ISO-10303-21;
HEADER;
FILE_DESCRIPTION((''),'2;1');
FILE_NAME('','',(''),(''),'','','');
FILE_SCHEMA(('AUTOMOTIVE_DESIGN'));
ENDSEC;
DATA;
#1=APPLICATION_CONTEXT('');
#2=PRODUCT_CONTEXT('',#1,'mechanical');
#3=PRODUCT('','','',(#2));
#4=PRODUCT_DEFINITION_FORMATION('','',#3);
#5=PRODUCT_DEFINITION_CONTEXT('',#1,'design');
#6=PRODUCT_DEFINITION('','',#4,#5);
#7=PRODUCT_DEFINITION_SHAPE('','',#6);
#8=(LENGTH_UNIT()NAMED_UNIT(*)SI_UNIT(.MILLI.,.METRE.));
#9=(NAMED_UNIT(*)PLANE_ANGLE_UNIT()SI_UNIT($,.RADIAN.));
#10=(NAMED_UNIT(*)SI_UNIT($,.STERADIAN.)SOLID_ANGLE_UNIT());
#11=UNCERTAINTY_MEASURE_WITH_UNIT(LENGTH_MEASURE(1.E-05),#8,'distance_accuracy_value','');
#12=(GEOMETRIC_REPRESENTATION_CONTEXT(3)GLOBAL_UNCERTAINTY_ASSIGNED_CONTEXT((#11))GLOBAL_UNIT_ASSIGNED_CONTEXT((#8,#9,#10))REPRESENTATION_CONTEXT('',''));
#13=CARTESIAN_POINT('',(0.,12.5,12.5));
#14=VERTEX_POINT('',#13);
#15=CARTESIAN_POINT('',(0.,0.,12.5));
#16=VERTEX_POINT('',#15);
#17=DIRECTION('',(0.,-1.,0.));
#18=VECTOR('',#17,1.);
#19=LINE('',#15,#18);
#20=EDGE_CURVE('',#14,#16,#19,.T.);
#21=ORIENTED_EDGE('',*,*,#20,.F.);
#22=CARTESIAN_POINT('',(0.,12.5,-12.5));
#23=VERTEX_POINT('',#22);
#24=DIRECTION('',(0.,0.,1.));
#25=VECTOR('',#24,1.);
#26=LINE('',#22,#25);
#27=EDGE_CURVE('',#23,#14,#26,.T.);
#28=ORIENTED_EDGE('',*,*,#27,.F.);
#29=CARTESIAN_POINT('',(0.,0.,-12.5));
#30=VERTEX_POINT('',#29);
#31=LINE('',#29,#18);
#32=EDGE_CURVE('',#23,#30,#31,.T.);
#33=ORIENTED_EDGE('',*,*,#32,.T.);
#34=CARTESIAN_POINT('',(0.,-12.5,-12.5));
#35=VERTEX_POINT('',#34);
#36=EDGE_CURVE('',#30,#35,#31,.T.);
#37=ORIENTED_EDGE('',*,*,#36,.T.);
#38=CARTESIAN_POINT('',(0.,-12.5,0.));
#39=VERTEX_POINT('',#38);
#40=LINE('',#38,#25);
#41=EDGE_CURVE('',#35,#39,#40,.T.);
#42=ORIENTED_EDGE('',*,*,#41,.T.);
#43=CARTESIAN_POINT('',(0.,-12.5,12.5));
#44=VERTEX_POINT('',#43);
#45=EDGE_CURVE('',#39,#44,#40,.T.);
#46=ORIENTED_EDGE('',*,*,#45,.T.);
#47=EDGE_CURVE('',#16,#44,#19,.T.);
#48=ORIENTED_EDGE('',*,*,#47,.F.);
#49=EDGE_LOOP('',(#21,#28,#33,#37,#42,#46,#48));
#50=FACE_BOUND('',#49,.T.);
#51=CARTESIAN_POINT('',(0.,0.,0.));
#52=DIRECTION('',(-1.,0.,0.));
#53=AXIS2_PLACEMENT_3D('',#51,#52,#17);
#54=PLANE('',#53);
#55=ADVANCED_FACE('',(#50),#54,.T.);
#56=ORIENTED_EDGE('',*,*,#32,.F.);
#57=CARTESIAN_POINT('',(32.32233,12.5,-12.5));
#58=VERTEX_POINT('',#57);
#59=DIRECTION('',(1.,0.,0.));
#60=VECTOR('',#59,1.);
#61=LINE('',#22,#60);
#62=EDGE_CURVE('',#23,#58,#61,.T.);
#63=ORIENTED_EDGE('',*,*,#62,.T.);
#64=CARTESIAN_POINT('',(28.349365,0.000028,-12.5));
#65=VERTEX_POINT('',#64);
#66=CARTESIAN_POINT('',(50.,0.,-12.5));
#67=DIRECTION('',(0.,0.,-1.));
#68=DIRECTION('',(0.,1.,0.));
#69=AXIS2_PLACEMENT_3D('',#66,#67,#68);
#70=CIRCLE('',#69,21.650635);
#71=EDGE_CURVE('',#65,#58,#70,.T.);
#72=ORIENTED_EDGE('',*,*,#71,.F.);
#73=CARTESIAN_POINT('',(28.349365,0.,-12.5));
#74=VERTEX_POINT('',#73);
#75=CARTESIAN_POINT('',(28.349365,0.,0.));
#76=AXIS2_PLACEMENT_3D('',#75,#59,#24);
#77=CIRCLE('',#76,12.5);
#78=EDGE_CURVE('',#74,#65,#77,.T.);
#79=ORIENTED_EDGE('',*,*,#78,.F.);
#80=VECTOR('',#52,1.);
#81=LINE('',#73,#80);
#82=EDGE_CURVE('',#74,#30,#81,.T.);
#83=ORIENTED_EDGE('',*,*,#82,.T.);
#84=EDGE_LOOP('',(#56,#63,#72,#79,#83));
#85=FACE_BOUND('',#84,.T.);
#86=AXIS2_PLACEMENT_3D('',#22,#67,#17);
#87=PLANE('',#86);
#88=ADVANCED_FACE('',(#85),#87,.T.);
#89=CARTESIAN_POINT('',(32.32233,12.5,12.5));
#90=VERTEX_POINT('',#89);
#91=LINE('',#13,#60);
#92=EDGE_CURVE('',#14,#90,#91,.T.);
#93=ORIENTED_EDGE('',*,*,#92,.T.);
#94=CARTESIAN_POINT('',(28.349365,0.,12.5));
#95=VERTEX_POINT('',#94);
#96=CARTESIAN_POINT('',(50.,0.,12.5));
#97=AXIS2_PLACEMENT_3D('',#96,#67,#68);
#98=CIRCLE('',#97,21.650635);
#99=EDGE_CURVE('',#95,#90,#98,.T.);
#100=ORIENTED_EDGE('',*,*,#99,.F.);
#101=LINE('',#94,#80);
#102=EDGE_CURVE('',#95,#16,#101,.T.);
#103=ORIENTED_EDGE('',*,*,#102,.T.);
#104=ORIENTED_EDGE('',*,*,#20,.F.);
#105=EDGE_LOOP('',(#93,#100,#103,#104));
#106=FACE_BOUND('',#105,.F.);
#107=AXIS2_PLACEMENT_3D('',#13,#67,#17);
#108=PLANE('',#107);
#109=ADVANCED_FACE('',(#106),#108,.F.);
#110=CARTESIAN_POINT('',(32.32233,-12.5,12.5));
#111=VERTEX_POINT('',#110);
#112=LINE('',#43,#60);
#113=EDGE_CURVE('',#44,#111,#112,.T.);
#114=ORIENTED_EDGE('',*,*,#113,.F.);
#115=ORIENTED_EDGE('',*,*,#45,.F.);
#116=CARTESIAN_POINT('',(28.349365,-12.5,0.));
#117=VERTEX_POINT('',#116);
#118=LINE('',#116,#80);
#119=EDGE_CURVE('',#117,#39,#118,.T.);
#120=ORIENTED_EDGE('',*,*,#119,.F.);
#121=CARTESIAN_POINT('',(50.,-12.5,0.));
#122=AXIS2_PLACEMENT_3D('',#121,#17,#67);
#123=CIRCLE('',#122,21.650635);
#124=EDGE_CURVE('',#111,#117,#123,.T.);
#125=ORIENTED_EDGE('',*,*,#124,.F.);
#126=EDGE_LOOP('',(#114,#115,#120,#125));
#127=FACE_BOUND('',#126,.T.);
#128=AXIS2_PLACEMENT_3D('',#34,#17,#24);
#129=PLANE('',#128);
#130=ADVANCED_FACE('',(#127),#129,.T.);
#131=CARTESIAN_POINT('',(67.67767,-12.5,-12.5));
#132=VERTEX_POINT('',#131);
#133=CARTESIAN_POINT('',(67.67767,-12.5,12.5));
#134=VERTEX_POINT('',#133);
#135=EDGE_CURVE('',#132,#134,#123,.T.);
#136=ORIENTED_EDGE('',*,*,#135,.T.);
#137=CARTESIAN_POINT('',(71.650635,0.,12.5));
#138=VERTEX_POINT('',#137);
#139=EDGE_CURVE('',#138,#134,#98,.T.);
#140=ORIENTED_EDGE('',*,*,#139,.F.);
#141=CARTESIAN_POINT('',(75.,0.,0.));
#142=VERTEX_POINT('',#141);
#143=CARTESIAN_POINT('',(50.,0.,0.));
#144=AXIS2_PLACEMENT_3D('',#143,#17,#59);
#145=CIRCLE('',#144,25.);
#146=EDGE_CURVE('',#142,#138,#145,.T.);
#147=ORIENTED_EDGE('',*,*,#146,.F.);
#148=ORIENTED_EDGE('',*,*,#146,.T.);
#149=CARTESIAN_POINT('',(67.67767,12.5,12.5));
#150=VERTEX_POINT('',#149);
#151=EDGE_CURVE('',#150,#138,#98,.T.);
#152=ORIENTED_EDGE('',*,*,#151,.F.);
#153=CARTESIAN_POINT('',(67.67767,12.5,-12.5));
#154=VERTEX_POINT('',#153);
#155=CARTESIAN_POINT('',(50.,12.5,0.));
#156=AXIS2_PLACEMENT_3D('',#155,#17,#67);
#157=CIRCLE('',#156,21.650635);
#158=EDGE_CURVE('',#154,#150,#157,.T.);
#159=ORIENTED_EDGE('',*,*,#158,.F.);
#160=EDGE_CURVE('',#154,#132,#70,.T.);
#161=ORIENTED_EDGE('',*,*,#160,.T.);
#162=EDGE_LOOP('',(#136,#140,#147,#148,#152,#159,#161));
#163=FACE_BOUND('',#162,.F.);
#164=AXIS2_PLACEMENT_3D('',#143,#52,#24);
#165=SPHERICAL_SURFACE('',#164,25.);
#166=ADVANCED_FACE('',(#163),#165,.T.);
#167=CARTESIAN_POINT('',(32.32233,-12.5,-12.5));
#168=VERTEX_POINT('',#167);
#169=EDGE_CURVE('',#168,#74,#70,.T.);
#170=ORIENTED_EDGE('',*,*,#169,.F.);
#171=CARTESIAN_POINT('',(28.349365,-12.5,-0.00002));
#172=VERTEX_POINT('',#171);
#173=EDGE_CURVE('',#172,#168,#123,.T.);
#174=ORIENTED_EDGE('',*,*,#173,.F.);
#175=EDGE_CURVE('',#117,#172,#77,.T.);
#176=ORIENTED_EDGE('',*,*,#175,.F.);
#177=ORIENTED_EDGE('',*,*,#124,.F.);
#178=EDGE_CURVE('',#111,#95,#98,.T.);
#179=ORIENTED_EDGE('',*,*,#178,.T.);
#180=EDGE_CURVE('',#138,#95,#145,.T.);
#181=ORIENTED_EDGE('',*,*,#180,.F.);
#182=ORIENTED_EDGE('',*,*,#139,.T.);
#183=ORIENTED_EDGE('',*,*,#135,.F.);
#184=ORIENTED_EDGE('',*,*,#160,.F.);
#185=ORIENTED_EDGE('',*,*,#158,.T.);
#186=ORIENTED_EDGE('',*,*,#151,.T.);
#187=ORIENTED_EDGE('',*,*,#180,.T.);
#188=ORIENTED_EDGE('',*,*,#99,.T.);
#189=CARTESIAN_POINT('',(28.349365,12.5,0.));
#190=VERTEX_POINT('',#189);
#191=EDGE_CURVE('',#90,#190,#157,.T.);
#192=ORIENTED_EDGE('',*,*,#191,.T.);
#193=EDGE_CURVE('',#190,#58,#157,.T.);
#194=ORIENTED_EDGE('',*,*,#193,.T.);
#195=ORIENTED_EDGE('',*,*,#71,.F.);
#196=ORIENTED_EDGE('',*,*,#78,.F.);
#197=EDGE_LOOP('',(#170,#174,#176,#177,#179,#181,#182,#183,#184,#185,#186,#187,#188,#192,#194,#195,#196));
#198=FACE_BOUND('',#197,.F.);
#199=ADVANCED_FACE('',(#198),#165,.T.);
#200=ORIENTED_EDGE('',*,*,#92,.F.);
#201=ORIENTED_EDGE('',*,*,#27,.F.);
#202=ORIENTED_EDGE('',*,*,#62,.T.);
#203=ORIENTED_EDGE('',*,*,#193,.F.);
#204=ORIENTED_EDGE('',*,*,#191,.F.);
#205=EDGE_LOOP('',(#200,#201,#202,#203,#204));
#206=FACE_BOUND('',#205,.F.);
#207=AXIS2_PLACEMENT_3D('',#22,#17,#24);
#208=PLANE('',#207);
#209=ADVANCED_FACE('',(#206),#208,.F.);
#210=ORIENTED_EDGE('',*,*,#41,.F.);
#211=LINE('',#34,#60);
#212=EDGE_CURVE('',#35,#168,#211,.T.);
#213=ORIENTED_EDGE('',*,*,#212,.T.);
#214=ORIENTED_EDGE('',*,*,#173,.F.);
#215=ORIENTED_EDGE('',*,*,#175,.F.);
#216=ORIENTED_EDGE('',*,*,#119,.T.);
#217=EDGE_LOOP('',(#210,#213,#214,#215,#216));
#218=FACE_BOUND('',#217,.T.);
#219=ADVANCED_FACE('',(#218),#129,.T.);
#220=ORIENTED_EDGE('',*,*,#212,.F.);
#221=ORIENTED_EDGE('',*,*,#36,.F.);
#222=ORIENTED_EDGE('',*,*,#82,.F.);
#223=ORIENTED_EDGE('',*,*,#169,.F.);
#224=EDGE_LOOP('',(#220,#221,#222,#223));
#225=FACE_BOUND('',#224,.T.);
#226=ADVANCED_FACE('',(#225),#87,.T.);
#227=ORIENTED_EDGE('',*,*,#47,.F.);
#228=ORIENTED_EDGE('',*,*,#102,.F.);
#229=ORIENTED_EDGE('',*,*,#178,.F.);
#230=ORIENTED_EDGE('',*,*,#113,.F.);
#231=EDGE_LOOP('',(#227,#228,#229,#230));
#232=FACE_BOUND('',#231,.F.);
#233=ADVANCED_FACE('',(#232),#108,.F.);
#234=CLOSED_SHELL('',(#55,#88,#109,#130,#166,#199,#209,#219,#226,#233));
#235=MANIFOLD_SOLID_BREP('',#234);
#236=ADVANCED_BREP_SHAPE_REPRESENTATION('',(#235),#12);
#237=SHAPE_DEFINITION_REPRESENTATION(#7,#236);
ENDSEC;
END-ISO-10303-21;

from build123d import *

# Parameters (mm, degrees)
F2_W     = 25
F2_H     = 25
F3_REACH = 110.3563390593


with BuildPart() as f1:
    # F0 (on Front) → F1 (revolve)
    with BuildSketch(Plane.XZ):
        with BuildLine():
            Line((0, 12.5), (0, 0))
            Line((0, 0), (25, 0))
            Line((25, 0), (50, 0))
            Line((50, 0), (75, 0))
            ThreePointArc((75, 0), (56.4704761276, 24.1481456572), (28.3493649054, 12.5))
            Line((28.3493649054, 12.5), (0, 12.5))
        make_face()
    revolve(axis=Axis((12.5, 0, 0), (1, 0, 0)))

    f3_end = f1.faces().sort_by_distance((56.4704761276, 0, -24.1481456572))[0]
    # F2 (on face) → F3 (join, up to a face of the model that its end follows)
    with BuildSketch(Plane(origin=(0, 0, 0), x_dir=(0, -1, 0), z_dir=(-1, 0, 0))):
        Rectangle(F2_W, F2_H)
    f3_long = extrude(amount=-F3_REACH, mode=Mode.PRIVATE)
    add(split(f3_long, bisect_by=f3_end, keep=Keep.ALL, mode=Mode.PRIVATE).solids().sort_by_distance((0, 0, 0))[0])


solid = f1.part
